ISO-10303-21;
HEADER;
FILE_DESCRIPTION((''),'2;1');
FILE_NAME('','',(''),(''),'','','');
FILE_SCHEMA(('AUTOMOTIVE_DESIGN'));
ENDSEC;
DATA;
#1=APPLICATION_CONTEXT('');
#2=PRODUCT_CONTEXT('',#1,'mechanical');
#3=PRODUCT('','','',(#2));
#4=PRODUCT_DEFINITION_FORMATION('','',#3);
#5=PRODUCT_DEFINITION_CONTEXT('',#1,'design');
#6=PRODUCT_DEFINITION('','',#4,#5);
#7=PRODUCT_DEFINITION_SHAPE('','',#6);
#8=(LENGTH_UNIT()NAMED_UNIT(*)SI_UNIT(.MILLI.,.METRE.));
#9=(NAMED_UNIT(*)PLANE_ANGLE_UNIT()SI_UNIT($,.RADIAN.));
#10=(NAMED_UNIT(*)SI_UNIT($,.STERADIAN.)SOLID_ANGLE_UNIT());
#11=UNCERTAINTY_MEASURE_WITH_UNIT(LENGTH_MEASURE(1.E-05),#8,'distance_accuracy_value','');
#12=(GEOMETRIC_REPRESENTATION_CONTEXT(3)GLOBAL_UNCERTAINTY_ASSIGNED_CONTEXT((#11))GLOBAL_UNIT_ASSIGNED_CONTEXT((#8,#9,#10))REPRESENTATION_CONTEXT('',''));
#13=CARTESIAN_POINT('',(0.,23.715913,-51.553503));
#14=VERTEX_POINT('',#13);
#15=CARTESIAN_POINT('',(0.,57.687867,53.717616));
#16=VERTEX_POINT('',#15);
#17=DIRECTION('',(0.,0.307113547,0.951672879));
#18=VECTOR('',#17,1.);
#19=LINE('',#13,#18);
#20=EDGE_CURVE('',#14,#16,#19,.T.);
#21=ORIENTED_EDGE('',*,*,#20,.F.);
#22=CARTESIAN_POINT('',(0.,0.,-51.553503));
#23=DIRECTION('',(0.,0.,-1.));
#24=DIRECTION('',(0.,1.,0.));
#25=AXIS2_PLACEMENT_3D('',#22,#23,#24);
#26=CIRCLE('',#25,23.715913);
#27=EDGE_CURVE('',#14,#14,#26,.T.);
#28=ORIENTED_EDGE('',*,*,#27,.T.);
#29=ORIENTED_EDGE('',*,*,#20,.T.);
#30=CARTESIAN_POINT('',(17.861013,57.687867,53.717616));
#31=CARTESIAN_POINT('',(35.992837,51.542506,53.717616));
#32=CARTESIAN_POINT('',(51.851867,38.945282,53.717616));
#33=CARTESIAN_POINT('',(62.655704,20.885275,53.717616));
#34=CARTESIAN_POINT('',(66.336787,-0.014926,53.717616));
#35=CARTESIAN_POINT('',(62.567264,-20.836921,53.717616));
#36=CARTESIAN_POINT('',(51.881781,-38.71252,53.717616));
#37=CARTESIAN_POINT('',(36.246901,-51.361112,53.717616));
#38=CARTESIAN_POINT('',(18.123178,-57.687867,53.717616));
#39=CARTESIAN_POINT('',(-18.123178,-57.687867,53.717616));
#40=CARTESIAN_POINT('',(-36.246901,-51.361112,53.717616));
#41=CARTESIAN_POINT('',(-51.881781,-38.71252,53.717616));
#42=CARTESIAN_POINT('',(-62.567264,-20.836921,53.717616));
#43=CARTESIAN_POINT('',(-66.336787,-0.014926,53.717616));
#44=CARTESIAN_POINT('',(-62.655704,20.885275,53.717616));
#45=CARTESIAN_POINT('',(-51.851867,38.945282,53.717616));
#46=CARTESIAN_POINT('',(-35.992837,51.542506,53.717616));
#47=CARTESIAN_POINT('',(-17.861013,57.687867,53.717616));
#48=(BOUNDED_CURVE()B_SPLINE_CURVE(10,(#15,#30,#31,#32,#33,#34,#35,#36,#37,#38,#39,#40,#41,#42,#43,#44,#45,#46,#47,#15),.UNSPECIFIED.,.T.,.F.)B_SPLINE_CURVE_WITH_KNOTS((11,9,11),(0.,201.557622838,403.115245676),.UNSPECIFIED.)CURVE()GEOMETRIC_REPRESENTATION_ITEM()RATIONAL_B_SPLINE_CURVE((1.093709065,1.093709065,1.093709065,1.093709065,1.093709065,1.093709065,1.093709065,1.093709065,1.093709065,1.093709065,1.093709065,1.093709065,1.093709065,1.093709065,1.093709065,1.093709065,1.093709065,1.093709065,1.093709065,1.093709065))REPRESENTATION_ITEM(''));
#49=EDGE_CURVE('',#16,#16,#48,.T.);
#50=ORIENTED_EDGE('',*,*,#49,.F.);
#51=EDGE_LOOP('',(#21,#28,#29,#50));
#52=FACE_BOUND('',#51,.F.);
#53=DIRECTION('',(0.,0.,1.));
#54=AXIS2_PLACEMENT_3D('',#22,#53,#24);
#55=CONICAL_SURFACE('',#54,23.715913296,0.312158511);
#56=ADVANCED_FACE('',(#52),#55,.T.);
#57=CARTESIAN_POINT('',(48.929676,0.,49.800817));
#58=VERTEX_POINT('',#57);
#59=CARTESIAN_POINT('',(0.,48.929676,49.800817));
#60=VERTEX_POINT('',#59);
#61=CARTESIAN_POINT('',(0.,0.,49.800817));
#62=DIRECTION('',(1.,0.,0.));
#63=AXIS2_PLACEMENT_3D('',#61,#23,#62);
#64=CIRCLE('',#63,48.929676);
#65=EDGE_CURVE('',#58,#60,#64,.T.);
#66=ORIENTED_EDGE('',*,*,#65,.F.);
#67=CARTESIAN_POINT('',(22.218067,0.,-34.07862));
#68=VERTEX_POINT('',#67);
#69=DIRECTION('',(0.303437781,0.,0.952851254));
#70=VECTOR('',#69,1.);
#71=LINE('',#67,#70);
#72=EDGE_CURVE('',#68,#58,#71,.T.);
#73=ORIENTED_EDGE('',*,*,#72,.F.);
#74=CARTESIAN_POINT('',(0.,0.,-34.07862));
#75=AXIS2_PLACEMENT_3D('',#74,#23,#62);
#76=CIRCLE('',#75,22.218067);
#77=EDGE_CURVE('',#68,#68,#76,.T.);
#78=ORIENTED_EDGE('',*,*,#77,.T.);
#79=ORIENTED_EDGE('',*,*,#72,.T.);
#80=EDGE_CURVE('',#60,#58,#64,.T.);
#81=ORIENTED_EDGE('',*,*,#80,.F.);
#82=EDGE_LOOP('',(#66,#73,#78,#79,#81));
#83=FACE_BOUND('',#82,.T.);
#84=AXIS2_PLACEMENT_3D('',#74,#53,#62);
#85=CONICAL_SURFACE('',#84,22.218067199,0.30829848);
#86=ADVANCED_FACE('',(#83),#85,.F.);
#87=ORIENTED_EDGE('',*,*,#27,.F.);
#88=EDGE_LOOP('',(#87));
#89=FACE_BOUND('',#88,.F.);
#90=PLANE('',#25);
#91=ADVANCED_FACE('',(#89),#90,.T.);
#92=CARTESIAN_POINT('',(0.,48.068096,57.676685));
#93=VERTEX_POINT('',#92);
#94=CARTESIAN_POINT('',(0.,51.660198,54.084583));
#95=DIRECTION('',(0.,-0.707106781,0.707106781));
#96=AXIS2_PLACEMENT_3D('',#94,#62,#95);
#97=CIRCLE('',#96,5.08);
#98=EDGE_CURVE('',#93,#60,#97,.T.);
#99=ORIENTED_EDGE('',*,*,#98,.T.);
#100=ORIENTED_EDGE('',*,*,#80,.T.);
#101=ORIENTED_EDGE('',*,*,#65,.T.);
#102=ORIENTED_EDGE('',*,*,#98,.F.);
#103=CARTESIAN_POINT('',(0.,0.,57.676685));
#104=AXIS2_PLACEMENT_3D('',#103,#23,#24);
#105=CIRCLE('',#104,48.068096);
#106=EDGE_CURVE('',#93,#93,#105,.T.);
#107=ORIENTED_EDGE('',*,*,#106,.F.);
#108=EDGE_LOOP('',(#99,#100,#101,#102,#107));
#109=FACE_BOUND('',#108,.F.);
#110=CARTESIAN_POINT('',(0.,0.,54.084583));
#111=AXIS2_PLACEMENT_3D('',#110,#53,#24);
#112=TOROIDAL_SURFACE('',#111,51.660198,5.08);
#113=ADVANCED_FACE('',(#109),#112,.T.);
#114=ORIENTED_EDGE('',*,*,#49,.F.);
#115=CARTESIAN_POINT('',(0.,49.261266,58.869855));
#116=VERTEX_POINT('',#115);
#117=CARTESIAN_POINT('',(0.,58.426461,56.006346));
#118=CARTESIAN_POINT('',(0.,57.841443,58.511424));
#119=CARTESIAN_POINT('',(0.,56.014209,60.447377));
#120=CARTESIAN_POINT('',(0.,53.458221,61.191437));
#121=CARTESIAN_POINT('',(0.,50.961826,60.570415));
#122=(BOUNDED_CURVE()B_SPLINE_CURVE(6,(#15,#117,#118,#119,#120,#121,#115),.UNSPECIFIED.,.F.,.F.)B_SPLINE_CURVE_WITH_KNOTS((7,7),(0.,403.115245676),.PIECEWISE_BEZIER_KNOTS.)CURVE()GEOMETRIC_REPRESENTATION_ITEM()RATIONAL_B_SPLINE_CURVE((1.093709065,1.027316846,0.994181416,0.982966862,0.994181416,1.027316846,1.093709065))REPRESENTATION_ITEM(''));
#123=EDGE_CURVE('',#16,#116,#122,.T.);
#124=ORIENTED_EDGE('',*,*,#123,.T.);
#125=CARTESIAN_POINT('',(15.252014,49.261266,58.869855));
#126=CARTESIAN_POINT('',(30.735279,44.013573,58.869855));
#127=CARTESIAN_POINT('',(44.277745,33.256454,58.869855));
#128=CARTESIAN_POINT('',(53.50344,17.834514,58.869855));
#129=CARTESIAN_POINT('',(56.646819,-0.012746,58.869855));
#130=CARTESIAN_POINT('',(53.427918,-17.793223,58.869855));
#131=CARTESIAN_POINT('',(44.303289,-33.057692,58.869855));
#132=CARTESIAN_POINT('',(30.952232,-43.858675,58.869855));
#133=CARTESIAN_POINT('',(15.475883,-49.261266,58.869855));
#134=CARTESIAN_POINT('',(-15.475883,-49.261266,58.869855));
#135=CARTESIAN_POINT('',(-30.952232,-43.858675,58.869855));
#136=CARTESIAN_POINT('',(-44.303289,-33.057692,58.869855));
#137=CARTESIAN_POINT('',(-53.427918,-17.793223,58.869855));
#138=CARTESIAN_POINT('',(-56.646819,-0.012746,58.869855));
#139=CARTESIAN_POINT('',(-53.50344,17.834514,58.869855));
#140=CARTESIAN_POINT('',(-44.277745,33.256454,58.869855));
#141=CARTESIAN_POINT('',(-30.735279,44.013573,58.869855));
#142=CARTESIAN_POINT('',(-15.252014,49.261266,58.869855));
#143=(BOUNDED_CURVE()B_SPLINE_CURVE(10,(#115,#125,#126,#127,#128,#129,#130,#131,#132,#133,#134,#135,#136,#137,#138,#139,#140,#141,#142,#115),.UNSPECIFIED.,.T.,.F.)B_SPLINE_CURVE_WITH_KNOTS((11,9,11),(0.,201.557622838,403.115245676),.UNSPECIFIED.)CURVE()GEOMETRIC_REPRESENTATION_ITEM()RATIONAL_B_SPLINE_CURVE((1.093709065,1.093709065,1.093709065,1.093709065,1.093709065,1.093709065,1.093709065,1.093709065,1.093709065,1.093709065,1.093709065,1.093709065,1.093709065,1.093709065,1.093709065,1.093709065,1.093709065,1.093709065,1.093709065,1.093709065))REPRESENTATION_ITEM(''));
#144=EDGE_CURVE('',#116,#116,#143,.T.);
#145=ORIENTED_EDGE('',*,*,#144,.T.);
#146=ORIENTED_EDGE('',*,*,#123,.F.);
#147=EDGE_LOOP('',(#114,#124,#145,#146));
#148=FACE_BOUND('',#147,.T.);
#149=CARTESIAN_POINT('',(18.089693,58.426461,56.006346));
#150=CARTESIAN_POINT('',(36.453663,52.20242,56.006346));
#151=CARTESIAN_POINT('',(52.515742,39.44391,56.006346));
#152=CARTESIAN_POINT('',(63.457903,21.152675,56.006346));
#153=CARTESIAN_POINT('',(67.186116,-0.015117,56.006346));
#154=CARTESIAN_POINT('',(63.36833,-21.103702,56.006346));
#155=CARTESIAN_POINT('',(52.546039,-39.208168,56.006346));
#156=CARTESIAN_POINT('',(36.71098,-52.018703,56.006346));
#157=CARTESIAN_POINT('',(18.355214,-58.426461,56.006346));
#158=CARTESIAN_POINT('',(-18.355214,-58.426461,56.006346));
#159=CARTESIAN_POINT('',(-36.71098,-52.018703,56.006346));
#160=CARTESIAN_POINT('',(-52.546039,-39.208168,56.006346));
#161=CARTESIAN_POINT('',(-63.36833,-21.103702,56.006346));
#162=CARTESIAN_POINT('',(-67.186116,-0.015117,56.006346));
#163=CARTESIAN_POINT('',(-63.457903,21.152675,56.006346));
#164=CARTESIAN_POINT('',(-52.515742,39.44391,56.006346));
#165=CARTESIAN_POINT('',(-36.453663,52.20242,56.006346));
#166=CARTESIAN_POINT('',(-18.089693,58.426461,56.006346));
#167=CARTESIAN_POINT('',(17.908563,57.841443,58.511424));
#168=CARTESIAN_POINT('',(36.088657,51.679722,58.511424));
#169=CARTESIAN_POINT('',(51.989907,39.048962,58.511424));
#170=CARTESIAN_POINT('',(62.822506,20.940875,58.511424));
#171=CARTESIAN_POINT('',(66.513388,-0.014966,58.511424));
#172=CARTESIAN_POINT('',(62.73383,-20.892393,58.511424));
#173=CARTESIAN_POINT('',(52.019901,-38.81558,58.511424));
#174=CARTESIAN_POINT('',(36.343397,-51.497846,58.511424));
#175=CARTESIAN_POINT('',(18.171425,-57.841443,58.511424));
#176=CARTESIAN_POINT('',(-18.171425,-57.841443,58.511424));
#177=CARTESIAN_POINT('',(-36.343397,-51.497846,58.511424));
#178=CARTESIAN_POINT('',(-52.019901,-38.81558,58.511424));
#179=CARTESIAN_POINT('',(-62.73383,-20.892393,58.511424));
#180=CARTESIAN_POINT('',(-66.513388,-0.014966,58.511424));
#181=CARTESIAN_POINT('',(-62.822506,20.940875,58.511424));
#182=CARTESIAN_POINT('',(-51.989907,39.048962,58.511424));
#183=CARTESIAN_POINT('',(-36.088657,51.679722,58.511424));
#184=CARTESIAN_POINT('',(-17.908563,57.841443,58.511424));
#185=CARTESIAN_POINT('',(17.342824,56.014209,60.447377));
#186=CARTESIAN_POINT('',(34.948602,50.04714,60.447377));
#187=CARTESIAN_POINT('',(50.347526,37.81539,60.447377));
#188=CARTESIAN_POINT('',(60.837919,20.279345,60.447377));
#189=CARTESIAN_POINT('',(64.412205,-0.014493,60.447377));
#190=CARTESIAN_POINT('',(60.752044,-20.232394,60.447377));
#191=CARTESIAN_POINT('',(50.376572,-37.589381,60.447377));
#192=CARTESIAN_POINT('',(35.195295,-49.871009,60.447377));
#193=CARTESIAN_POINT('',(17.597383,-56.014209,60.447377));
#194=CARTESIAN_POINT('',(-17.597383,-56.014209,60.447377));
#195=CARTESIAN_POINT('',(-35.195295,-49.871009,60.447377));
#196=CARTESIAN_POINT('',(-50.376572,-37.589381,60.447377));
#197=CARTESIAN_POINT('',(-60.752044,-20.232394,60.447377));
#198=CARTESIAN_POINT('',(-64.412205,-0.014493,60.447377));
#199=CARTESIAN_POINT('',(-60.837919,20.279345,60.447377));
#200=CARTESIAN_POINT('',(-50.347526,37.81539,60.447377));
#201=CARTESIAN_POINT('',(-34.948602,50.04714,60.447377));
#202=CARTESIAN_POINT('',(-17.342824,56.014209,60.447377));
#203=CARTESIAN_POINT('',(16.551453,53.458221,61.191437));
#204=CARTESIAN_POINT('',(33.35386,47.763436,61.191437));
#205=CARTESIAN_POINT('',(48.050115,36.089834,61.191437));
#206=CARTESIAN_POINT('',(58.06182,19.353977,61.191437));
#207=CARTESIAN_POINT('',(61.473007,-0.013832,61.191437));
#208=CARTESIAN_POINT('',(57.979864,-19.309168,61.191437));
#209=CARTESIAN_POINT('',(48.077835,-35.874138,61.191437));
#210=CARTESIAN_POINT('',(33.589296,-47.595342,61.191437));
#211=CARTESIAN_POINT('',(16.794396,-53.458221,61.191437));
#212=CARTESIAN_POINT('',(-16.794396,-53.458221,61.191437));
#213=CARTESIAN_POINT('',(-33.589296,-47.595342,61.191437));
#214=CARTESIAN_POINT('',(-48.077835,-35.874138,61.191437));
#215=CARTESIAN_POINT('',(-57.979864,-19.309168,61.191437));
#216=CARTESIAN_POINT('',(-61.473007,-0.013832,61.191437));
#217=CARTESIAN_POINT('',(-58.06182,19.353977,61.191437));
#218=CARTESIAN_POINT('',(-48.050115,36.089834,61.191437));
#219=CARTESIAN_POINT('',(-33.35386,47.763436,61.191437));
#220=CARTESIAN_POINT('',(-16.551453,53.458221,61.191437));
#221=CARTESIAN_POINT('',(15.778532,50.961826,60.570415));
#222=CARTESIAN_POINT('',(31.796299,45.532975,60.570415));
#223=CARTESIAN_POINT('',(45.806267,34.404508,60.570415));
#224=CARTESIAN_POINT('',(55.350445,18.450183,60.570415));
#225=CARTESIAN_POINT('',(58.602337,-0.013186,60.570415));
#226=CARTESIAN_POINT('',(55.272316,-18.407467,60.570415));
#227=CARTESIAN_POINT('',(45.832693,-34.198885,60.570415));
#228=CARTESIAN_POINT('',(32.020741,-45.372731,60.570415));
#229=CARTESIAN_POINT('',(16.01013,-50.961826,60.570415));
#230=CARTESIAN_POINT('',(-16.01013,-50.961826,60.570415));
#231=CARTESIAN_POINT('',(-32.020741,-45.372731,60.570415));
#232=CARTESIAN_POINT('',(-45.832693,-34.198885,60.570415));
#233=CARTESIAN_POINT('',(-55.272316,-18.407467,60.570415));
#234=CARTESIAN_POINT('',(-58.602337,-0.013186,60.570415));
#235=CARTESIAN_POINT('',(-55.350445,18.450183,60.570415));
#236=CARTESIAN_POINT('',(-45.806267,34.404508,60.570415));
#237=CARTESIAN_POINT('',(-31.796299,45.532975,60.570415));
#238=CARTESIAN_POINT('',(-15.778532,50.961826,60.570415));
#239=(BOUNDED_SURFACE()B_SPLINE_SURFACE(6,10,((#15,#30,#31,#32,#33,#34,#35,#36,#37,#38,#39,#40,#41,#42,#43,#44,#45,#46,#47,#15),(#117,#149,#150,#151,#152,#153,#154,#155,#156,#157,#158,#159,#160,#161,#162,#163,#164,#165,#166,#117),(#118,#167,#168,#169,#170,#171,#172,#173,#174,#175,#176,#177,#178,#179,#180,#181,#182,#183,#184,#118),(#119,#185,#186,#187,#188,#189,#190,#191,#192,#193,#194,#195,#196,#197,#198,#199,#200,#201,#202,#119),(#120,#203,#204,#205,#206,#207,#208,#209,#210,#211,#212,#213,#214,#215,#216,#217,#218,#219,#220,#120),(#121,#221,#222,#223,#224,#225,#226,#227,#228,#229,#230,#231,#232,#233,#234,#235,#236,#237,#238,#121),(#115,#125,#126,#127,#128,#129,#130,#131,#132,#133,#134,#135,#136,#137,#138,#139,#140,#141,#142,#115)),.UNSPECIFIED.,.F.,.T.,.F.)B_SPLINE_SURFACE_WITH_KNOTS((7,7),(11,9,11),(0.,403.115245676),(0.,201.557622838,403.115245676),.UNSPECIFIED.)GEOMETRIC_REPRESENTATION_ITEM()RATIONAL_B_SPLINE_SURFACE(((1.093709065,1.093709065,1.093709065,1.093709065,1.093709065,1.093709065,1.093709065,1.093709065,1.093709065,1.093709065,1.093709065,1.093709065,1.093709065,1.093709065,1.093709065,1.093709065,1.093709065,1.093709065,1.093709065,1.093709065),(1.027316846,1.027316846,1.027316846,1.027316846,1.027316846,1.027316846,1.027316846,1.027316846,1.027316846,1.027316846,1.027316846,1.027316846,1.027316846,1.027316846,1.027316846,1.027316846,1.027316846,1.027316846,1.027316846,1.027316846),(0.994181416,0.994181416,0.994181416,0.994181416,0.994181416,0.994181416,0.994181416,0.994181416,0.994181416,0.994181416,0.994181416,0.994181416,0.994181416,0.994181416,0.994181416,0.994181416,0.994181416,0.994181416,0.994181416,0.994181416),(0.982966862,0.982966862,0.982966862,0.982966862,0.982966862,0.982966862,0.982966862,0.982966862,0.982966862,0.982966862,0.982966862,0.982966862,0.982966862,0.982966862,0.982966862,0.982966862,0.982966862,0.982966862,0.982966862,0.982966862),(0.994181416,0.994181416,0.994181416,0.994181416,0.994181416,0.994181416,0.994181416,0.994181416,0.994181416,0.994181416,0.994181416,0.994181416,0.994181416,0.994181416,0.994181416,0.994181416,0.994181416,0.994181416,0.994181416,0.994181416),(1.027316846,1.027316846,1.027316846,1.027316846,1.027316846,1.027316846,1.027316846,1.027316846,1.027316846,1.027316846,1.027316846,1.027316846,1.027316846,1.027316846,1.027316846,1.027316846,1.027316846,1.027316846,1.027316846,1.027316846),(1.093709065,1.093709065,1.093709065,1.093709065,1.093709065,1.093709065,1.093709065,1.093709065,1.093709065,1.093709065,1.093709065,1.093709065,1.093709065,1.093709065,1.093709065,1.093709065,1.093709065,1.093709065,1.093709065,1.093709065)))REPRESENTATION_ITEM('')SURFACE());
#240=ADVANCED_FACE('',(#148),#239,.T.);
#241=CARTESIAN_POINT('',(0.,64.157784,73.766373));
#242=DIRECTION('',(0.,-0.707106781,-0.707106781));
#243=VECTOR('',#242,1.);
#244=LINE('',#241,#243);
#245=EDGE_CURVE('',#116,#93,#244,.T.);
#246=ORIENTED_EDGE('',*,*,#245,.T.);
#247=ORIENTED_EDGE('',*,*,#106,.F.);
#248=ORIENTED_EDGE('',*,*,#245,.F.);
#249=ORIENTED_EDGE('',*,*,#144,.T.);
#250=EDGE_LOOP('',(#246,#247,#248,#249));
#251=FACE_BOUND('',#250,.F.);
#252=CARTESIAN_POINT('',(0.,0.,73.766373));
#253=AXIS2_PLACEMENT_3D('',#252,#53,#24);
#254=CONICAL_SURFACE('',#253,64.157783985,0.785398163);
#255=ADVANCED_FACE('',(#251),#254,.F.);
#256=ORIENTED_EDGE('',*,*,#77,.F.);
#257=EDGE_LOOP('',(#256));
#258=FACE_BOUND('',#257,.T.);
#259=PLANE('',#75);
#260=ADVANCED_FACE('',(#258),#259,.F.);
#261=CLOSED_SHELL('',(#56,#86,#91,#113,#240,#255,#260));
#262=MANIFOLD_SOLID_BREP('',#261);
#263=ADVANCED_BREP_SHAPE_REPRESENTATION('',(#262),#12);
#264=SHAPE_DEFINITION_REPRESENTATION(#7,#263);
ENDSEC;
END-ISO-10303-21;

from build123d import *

# Parameters (mm, degrees)
F2_R = 5.08


# Not quite as in the source:
# - a fillet or chamfer that OpenCascade refuses, or shapes differently, is made with other operations: its cross-section is extruded or revolved along the edge and cut away or added


with BuildPart() as f1:
    # F0 (on Right) → F1 (revolve)
    with BuildSketch(Plane.YZ):
        Polygon((31.2051475048, 40.8137366176), (0, 38.317322731), (0, -51.5535026789), (23.7159132957, -51.5535026789), (64.1577839851, 73.7663730979), align=None)
    revolve(axis=Axis((0, 0, -6.6180899739), (0, 0, -1)))

    # F2
    f2_edges = [f1.edges().sort_by_distance(p)[0] for p in [
        (0, -64.157784, 73.766373),
    ]]
    fillet(f2_edges, radius=F2_R)

    # F3 (on Front) → F4 (revolve, cut)
    with BuildSketch(Plane.XZ):
        Polygon((48.9296764135, 49.8008169234), (0, 49.8008169234), (0, -34.0786203742), (22.218067199, -34.0786203742), align=None)
    revolve(axis=Axis((0, 0, 7.8610982746), (0, 0, -1)), mode=Mode.SUBTRACT)

    # F5: fillet of radius 5.08 on 1 edges, made by hand

    # F5_s1 → F5_t2 (revolve, cut)
    with BuildSketch(Plane.YZ):
        with BuildLine():
            ThreePointArc((48.0680960352, 57.6766851479), (46.6103251908, 53.5321519556), (48.9296764135, 49.8008169234))
            Line((48.9296764135, 49.8008169234), (48.8750659721, 49.7151416079))
            ThreePointArc((48.8750659721, 49.7151416079), (44.5609521121, 49.6992169234), (40.1922278106, 49.6992169234))
            Line((40.1922278106, 49.6992169234), (40.1203857617, 49.8726589723))
            Line((40.1203857617, 49.8726589723), (47.9962539862, 57.7485271969))
            Line((47.9962539862, 57.7485271969), (48.0680960352, 57.6766851479))
        make_face()
    revolve(axis=Axis((0, 0, 49.8008169234), (0, 0, -1)), mode=Mode.SUBTRACT)


solid = f1.part
